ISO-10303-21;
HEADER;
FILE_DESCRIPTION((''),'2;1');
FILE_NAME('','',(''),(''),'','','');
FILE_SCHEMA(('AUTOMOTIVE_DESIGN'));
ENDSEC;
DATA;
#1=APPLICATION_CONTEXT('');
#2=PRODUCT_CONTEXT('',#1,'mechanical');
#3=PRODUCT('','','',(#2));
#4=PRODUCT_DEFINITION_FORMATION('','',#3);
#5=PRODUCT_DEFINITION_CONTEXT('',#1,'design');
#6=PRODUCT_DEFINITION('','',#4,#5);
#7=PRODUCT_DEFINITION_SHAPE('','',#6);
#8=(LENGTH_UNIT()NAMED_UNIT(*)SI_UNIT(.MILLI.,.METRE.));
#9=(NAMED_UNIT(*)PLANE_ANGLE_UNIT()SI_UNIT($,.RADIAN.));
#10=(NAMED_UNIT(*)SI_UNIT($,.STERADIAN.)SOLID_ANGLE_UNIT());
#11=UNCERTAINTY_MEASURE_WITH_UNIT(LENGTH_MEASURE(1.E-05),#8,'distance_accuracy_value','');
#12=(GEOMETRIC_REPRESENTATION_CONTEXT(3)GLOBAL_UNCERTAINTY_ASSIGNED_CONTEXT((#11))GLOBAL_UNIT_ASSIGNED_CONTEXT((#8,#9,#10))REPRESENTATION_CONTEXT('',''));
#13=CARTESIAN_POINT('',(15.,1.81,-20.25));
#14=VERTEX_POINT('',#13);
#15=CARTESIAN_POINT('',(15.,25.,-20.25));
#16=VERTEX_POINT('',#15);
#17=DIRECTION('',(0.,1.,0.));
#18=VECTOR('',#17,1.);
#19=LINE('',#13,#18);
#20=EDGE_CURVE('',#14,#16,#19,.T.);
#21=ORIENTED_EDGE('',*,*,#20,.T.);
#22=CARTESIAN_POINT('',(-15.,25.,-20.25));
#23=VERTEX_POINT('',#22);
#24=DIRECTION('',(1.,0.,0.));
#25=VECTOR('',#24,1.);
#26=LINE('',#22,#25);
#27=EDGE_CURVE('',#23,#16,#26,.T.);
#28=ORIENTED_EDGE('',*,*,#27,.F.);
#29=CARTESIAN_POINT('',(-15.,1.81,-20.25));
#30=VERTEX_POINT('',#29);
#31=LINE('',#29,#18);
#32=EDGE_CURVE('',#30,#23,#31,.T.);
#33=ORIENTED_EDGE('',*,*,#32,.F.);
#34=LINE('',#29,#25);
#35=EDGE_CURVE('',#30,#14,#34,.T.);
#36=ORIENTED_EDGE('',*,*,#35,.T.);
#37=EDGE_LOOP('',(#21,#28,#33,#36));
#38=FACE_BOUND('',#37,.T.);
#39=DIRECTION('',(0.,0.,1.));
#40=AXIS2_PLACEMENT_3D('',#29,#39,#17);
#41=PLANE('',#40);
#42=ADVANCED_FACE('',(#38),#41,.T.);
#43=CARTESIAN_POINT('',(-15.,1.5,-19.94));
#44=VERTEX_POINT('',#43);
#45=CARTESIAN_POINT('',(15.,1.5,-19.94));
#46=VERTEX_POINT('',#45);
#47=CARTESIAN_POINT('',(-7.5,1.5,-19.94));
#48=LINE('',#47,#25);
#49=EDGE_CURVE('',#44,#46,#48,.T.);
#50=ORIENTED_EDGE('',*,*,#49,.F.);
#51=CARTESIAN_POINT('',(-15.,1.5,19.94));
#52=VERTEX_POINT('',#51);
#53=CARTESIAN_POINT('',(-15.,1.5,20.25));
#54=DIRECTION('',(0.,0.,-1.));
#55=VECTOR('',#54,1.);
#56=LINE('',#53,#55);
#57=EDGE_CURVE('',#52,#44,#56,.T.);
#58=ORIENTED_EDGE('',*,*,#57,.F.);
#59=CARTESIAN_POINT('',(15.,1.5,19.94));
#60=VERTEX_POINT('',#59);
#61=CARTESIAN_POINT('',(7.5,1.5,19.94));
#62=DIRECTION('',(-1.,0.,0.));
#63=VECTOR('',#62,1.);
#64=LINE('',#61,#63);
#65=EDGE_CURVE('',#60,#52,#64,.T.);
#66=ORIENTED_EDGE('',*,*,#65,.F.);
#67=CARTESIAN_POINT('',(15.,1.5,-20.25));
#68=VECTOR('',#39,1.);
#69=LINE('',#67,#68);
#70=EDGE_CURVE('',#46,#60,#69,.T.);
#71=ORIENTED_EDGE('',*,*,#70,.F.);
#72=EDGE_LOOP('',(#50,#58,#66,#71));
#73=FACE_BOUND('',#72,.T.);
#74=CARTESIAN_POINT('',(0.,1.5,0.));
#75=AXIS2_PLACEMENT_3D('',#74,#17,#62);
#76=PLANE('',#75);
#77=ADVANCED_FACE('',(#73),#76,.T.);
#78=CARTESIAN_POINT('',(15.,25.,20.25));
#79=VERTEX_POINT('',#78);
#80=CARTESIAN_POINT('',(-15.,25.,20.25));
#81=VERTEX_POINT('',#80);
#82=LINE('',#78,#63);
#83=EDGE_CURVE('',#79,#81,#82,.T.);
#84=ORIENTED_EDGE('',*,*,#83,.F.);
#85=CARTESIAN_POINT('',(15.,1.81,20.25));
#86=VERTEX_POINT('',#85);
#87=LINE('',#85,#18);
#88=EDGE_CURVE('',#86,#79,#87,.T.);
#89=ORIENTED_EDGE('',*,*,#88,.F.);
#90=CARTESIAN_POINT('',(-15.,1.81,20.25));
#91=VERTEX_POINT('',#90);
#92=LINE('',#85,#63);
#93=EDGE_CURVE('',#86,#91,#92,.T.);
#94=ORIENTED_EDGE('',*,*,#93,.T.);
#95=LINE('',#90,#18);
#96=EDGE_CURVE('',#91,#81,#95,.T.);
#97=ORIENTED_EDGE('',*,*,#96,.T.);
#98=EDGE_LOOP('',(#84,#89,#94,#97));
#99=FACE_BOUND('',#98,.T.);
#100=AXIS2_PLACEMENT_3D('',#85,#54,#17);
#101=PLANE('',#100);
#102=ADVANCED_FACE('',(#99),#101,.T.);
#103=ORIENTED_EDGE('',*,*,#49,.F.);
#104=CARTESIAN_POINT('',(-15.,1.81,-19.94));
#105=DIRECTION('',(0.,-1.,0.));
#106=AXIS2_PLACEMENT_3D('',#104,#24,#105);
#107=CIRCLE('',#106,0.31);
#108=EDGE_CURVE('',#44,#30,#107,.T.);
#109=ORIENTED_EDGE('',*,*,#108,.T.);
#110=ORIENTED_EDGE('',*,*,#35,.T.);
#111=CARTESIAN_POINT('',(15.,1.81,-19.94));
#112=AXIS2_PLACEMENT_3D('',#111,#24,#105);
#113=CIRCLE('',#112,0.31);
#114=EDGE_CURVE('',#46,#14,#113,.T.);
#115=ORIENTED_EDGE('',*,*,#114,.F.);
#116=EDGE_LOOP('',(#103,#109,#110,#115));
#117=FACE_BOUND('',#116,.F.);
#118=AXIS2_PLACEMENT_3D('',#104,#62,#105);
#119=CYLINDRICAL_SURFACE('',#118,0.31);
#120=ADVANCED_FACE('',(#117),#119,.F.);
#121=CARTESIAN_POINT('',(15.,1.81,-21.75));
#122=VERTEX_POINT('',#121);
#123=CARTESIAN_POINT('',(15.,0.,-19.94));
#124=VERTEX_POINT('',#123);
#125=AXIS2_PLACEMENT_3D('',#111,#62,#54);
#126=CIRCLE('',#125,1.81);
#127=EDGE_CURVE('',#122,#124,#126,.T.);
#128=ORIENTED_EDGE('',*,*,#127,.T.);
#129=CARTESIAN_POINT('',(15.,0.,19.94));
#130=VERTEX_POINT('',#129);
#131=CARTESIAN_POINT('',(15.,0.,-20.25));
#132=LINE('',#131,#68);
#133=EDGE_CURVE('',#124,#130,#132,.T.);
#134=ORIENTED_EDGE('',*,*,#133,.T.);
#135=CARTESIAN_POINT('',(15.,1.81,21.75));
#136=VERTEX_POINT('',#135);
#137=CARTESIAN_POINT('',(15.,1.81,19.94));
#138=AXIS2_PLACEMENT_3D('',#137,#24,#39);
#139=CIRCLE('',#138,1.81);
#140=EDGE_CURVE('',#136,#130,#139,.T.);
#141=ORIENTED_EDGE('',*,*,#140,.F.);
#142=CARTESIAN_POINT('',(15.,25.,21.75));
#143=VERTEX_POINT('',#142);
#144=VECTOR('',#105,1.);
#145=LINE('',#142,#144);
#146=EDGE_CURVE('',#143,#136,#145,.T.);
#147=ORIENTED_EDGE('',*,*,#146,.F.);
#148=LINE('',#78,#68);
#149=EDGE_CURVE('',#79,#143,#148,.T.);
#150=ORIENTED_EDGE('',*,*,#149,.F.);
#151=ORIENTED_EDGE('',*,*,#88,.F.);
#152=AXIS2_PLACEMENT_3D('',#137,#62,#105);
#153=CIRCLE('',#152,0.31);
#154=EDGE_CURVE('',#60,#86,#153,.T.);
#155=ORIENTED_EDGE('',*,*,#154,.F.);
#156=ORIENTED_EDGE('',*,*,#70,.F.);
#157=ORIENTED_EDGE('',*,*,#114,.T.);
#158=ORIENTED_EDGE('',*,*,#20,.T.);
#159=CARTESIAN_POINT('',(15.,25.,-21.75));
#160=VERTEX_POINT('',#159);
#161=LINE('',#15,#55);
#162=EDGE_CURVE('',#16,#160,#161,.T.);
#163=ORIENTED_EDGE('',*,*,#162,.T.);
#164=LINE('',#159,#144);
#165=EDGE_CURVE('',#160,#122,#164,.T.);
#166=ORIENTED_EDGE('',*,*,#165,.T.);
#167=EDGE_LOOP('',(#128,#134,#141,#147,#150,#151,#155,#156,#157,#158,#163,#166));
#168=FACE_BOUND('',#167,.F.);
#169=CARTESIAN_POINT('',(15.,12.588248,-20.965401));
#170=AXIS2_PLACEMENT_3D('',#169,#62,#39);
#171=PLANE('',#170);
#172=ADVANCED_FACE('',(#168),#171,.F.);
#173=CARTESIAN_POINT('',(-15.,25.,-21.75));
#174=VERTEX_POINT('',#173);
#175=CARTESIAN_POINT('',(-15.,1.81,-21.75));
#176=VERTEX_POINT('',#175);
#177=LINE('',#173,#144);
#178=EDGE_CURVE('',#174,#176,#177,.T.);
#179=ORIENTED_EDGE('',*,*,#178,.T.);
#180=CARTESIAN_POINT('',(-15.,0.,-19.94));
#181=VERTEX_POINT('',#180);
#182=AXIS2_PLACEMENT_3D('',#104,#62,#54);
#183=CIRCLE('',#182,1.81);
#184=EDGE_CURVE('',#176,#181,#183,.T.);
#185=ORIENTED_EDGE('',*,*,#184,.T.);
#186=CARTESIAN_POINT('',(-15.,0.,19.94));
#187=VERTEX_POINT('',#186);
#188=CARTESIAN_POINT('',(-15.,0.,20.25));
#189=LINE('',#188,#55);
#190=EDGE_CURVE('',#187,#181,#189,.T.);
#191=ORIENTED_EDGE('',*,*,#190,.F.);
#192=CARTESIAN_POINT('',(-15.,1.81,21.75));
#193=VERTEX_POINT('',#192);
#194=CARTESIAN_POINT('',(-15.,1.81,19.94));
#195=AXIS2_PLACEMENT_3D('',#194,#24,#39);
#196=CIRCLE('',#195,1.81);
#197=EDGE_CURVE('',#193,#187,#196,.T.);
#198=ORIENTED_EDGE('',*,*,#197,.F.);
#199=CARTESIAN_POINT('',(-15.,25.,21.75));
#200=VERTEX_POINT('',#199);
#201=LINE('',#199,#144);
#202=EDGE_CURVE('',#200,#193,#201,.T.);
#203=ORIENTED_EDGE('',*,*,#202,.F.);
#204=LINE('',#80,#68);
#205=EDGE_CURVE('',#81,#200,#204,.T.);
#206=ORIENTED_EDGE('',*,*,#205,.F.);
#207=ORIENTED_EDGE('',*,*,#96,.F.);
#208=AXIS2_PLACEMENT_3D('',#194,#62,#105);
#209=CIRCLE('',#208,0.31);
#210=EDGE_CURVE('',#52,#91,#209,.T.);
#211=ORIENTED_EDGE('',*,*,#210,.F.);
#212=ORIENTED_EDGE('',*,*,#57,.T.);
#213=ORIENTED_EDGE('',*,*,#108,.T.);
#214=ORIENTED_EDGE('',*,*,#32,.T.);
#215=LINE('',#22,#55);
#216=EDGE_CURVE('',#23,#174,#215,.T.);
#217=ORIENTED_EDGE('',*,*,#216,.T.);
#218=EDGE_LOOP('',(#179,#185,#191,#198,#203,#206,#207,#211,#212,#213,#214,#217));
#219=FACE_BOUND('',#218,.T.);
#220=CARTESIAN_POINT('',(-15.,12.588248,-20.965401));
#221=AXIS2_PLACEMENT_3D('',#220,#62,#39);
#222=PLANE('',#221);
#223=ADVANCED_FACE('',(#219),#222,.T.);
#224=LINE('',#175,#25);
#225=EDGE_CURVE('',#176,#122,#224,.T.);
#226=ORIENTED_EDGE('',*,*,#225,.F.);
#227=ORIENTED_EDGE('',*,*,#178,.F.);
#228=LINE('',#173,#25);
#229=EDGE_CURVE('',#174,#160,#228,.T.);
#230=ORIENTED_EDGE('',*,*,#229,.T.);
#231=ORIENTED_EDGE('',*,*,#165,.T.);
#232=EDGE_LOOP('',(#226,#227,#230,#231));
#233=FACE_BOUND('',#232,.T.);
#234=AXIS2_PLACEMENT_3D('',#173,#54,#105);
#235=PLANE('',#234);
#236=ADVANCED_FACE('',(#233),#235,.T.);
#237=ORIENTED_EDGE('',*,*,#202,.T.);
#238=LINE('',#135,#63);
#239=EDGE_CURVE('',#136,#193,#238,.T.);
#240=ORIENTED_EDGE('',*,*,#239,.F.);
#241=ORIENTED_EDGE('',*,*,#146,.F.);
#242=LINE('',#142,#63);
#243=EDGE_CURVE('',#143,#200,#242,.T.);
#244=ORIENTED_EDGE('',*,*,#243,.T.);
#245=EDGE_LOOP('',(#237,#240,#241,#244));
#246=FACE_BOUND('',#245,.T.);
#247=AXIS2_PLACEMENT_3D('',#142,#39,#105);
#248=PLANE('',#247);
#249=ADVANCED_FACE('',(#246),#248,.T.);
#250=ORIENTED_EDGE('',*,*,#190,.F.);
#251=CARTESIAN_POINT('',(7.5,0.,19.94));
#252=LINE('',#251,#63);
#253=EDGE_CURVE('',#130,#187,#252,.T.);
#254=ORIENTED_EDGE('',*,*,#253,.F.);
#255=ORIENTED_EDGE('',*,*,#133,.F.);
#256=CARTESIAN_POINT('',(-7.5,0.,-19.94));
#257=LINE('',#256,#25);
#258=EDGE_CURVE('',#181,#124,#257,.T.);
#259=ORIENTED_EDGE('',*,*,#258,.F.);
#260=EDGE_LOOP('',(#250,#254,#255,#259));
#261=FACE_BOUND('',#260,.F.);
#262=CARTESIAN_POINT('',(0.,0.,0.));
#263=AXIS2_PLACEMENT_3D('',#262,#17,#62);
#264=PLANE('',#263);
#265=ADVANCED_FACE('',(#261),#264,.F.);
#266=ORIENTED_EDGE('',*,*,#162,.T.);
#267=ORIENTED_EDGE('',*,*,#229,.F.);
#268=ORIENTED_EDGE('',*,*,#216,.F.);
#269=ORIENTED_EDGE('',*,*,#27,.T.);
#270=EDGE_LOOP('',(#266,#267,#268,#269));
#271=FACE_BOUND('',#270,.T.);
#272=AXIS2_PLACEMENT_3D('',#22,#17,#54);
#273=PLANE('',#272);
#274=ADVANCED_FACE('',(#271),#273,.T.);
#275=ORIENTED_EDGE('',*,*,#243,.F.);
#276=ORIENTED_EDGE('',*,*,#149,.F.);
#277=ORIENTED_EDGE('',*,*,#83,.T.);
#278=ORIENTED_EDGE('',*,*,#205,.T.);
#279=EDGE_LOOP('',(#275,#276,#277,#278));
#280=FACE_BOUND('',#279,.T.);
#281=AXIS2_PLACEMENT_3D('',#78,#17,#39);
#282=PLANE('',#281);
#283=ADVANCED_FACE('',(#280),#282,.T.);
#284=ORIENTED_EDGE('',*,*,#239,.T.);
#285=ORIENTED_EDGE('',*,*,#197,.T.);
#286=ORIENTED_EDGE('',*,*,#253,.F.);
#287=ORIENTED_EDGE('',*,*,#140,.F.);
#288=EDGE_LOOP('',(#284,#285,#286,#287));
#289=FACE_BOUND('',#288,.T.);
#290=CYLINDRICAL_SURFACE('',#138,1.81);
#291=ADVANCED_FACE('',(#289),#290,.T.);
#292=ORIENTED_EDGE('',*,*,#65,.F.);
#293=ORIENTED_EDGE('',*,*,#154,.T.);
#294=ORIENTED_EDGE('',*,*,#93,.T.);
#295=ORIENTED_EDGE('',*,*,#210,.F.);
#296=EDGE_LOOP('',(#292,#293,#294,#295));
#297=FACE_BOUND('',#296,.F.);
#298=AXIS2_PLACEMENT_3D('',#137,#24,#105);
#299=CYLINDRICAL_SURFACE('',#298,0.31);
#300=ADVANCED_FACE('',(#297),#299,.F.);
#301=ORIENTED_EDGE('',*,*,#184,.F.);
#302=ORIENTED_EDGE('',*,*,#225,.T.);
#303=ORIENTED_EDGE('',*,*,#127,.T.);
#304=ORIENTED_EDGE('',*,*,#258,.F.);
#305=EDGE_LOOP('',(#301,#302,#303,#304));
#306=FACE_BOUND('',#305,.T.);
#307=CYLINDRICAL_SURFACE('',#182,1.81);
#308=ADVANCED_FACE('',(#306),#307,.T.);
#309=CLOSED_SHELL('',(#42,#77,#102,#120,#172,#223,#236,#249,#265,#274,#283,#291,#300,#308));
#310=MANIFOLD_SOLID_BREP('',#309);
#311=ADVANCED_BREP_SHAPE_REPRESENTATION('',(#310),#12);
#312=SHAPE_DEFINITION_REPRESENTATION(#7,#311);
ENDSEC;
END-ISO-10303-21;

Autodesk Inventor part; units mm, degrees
ref_plane "YZ Plane" through (0, 0, 0) normal (1, 0, 0) x (0, 1, 0)
ref_plane "XZ Plane" through (0, 0, 0) normal (0, 1, 0) x (-1, 0, 0)
ref_plane "XY Plane" through (0, 0, 0) normal (0, 0, 1) x (1, 0, 0)
sketch "Sketch1" plane through (0, 0, 0) normal (0, 1, 0) x (-1, 0, 0)
  line L0 (-15, 20.25) -> (15, 20.25)
  line L1 (15, 20.25) -> (15, -20.25)
  line L2 (15, -20.25) -> (-15, -20.25)
  line L3 (-15, -20.25) -> (-15, 20.25)
  line L4 (-15, 20.25) -> (15, -20.25) construction
  line L5 (15, 20.25) -> (-15, -20.25) construction
  point P0 (0, 0)
  dimension "d0" = 30
  dimension "d1" = 40.5
extrude "Plate1" add sketch "Sketch1" along normal blind 1.5
sketch "Sketch2" plane through (-15, 0, -21.75) normal (0, 0, 1) x (1, 0, 0)
  line L0 (30, 0) -> (0, 0)
  line L1 (0, 0) -> (0, 25)
  line L2 (0, 25) -> (30, 25)
  line L3 (30, 25) -> (30, 0)
edge flange "Flange1" height 25 angle 90 thickness 1.5 bend radius 0.31 thickness toward (0, 0, 1) relief tear relief width 1.5 relief depth 0.75 corner gap 0.31 corner form 0 edges at (0, 1.5, -20.25) (0, 1.5, 20.25) wall of the first edge with corners at (15, 0, -21.75) (-15, 0, -21.75) (-15, 25, -21.75) (15, 25, -21.75)
bend "Bend1"
corner "Corner1"
equation "\"d2\" = Thickness"
equation "\"d3\" = BendReliefWidth"
equation "\"d4\" = BendReliefDepth"
equation "\"d5\" = MinimumRemnant"
equation "\"d6\" = TransitionRadius"
equation "\"d9\" = BendRadius"
equation "\"d10\" = CornerReliefSize"
equation "\"d11\" = GapSize"
equation "\"d12\" = JacobiRadiusSize"
equation "\"BendReliefWidth\" = Thickness"
equation "\"BendReliefDepth\" = 0.5 * Thickness"
equation "\"CornerReliefSize\" = 4 * Thickness"
equation "\"MinimumRemnant\" = 2 * Thickness"
equation "\"TransitionRadius\" = BendRadius"
equation "\"JacobiRadiusSize\" = BendRadius"
equation "\"GapSize\" = Thickness"
equation "\"Thickness\" = 1.5"
equation "\"BendRadius\" = 0.31"
properties part number "chanhui" material "Aluminum 6061-AHC"
